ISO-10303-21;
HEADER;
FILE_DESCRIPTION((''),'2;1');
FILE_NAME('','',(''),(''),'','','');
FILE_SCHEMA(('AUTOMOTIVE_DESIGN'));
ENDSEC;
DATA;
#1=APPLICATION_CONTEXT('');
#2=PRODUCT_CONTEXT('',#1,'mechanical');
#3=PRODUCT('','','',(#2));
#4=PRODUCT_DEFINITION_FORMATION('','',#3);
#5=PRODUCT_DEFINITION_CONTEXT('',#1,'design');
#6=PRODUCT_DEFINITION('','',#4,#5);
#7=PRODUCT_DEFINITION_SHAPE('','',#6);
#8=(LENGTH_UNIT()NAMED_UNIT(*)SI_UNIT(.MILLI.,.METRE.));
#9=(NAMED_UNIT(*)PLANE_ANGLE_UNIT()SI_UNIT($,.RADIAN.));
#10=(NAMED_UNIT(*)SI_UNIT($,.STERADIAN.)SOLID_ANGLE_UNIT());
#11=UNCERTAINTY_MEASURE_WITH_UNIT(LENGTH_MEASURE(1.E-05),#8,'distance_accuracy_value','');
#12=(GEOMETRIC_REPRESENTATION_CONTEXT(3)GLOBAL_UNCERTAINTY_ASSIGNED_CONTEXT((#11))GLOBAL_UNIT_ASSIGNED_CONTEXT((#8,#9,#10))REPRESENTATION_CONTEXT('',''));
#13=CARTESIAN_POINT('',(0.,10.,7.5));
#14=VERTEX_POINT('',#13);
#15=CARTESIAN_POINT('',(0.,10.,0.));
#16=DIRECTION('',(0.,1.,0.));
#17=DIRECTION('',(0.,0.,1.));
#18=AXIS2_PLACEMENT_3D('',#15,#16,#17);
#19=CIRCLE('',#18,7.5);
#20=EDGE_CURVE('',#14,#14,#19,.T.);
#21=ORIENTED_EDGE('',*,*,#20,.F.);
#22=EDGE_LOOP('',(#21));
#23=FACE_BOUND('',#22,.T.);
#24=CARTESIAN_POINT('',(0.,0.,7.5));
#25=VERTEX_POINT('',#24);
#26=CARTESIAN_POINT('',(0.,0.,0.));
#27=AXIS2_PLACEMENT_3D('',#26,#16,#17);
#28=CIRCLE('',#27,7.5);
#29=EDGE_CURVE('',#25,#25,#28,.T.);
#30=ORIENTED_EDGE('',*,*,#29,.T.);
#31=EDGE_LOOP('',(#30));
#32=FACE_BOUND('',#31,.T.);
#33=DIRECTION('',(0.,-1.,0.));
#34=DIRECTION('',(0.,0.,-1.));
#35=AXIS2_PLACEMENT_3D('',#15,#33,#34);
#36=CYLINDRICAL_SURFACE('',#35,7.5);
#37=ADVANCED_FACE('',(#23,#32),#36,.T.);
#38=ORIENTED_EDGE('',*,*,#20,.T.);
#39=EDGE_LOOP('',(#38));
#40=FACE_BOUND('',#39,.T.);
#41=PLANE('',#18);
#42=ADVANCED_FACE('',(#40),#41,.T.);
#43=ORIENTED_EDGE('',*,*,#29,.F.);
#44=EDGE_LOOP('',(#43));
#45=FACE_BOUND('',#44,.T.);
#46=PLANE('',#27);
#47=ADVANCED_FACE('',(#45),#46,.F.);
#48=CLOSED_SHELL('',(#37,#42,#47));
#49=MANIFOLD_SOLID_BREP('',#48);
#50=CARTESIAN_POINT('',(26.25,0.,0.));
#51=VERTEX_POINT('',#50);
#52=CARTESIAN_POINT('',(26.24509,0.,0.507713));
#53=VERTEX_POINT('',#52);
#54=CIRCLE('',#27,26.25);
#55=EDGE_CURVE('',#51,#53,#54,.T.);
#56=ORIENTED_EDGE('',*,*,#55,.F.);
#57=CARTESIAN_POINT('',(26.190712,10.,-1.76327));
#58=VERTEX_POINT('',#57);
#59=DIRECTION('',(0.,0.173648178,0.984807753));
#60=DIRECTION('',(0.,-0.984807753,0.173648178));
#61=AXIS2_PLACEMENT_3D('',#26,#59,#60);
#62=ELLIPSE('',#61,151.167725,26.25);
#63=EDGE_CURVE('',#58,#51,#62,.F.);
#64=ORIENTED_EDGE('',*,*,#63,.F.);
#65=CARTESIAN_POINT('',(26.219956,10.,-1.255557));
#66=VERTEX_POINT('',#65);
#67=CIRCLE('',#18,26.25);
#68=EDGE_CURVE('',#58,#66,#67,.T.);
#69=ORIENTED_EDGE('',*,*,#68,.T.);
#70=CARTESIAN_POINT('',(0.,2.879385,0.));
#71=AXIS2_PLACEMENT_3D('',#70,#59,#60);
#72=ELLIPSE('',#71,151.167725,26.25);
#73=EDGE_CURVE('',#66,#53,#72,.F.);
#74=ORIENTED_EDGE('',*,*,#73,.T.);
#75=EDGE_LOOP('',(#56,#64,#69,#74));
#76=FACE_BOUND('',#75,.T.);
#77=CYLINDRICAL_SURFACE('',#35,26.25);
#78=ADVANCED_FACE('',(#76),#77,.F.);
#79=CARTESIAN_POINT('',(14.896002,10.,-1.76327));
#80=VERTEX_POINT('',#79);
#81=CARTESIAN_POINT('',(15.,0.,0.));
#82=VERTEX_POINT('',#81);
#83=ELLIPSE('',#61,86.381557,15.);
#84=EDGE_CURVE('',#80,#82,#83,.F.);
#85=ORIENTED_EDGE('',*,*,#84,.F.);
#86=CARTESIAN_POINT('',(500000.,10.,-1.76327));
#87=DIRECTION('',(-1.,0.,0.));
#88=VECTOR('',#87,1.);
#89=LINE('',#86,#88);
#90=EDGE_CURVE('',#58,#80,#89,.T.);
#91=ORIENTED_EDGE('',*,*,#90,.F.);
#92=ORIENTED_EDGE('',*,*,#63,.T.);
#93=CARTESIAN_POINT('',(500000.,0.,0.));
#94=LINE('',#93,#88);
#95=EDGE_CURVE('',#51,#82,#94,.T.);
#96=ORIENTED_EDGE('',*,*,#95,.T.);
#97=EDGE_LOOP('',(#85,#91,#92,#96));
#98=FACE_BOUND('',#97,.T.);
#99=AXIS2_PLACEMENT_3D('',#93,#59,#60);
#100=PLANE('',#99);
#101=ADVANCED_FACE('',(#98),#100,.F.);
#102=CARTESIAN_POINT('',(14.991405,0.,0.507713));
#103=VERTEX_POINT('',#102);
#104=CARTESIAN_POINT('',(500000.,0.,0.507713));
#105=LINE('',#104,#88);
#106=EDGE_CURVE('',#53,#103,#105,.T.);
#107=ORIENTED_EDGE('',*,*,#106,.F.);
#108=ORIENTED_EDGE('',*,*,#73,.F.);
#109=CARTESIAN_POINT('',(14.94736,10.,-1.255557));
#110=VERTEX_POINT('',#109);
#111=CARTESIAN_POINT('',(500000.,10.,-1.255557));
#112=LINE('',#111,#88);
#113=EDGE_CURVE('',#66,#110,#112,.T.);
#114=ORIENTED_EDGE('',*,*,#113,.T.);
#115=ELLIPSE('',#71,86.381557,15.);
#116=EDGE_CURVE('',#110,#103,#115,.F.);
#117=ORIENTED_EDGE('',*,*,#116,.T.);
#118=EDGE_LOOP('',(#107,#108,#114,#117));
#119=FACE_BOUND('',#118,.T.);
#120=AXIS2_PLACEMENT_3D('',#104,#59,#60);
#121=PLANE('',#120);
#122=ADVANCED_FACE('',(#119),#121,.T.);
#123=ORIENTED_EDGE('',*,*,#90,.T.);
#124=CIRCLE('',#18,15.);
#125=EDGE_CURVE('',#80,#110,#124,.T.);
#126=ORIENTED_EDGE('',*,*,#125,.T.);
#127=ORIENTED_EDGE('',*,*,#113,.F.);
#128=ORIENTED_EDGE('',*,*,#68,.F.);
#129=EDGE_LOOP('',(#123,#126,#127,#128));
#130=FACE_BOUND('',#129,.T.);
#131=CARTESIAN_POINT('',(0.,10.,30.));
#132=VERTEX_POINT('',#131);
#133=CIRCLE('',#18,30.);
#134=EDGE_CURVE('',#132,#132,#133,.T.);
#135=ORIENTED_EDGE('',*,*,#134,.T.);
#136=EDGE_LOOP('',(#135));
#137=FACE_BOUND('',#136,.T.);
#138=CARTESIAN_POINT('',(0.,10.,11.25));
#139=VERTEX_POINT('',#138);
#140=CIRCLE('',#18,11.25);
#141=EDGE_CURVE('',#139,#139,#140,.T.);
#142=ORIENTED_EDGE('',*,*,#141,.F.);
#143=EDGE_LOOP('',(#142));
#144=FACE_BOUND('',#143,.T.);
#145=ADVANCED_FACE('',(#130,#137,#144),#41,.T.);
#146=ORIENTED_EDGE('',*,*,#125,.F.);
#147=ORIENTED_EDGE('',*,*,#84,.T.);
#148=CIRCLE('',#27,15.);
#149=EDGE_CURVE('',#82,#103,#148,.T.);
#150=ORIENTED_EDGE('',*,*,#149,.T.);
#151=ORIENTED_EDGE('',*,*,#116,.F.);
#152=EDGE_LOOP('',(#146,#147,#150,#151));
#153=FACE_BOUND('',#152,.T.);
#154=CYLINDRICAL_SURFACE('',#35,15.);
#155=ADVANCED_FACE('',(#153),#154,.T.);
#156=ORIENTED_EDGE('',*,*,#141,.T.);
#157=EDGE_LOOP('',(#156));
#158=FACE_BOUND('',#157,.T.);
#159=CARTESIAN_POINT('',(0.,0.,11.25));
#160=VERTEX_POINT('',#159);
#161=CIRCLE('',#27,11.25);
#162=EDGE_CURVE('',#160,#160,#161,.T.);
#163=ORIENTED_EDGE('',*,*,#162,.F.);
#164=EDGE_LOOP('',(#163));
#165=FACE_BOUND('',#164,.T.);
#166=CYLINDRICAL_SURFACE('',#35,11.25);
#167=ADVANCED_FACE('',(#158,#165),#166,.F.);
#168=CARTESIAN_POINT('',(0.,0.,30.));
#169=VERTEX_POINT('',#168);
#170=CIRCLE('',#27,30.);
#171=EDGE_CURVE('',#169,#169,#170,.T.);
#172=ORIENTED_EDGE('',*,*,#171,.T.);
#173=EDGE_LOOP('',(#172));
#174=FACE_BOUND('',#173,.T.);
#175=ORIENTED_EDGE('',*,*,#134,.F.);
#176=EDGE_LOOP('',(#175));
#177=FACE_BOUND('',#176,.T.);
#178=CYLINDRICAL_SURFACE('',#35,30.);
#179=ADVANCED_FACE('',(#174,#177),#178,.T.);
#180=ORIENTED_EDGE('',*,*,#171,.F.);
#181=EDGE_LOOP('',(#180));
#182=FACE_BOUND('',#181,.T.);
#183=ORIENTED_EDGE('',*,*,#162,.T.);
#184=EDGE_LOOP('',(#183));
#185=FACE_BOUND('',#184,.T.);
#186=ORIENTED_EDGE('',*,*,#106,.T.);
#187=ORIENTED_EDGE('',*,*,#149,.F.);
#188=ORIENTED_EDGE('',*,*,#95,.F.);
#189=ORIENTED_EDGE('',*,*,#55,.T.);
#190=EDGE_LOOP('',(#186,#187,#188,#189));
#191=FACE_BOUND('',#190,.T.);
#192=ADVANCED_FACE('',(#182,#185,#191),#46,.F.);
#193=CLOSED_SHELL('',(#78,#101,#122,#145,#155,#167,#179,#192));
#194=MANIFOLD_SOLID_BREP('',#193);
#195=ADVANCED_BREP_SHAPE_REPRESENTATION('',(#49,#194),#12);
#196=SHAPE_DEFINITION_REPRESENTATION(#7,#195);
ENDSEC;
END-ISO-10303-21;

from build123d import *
from build123d.topology import SkipClean

# Parameters (mm, degrees)
SKETCH1_R             = 7.5
BOSS_EXTRUDE1_DEPTH   = 10
SKETCH1_R_2           = 15
SKETCH1_R_3           = 11.25
BOSS_EXTRUDE1_2_DEPTH = 10
SKETCH1_R_4           = 30
SKETCH1_R_5           = 26.25
BOSS_EXTRUDE1_3_DEPTH = 10
BOSS_EXTRUDE2_START   = 7.289779118
BOSS_EXTRUDE2_DEPTH   = 18.960220882
SKETCH10_W            = 3.75
SKETCH10_H            = 10


# Read off the part's stored shape, not the designer's step: Boss-Extrude2
with BuildPart() as part:
    # Sketch1 → Boss-Extrude1 (new body)
    with BuildSketch(Plane(origin=(0, 0, 0), x_dir=(1, 0, 0), z_dir=(0, 1, 0))):
        with Locations(Location((0, 0, 0), (0, 0, 270))):
            Circle(SKETCH1_R)
    extrude(amount=BOSS_EXTRUDE1_DEPTH)



with BuildPart() as body_2:
    # Sketch1 → Boss-Extrude1 2 (new body)
    with BuildSketch(Plane(origin=(0, 0, 0), x_dir=(1, 0, 0), z_dir=(0, 1, 0))):
        with Locations(Location((0, 0, 0), (0, 0, 270))):
            Circle(SKETCH1_R_2)
        with Locations(Location((0, 0, 0), (0, 0, 270))):
            Circle(SKETCH1_R_3, mode=Mode.SUBTRACT)
    extrude(amount=BOSS_EXTRUDE1_2_DEPTH)


with BuildPart() as body_3:
    # Sketch1 → Boss-Extrude1 3 (new body)
    with BuildSketch(Plane(origin=(0, 0, 0), x_dir=(1, 0, 0), z_dir=(0, 1, 0))):
        with Locations(Location((0, 0, 0), (0, 0, 270))):
            Circle(SKETCH1_R_4)
        with Locations(Location((0, 0, 0), (0, 0, 270))):
            Circle(SKETCH1_R_5, mode=Mode.SUBTRACT)
    extrude(amount=BOSS_EXTRUDE1_3_DEPTH)


with BuildPart() as part_1:
    add(part.part)

    add(body_2.part)  # Boss-Extrude2 merges body 2

    add(body_3.part)  # Boss-Extrude2 merges body 3
    # Boss-Extrude2 outline → Boss-Extrude2 (add)
    with BuildSketch(Plane(origin=(0, 0, 0), x_dir=(0, 0, -1), z_dir=(1, 0, 0)).offset(BOSS_EXTRUDE2_START)):
        Polygon((0, 0), (1.763269807, 10), (1.255556501, 10), (-0.507713306, 0), align=None)
    extrude(amount=BOSS_EXTRUDE2_DEPTH)

    # Sketch10 → Cut-Revolve1 (revolve, cut)
    with SkipClean():  # the faces are left unmerged after this step: merging them gives an invalid solid
        with BuildSketch(Plane.XY):
            with Locations((9.375, 5)):
                Rectangle(SKETCH10_W, SKETCH10_H)
        revolve(axis=Axis((0, 85.419330933, 0), (0, -1, 0)), mode=Mode.SUBTRACT)
    add(part_1.part.scale(1), mode=Mode.REPLACE)  # the faces are merged on a copy


with BuildPart() as cut_revolve1_piece_1:
    # of the separate pieces the step leaves, piece 1, a body of its own (cut_revolve1_pieces)
    add(part_1.part.solids().sort_by_distance((0, 0, 11.25))[0])


with BuildPart() as cut_revolve1_piece_2:
    # of the separate pieces the step leaves, piece 2, a body of its own (cut_revolve1_pieces)
    add(part_1.part.solids().sort_by_distance((0, 0, 7.5))[0])


solid = Compound([cut_revolve1_piece_1.part, cut_revolve1_piece_2.part])
